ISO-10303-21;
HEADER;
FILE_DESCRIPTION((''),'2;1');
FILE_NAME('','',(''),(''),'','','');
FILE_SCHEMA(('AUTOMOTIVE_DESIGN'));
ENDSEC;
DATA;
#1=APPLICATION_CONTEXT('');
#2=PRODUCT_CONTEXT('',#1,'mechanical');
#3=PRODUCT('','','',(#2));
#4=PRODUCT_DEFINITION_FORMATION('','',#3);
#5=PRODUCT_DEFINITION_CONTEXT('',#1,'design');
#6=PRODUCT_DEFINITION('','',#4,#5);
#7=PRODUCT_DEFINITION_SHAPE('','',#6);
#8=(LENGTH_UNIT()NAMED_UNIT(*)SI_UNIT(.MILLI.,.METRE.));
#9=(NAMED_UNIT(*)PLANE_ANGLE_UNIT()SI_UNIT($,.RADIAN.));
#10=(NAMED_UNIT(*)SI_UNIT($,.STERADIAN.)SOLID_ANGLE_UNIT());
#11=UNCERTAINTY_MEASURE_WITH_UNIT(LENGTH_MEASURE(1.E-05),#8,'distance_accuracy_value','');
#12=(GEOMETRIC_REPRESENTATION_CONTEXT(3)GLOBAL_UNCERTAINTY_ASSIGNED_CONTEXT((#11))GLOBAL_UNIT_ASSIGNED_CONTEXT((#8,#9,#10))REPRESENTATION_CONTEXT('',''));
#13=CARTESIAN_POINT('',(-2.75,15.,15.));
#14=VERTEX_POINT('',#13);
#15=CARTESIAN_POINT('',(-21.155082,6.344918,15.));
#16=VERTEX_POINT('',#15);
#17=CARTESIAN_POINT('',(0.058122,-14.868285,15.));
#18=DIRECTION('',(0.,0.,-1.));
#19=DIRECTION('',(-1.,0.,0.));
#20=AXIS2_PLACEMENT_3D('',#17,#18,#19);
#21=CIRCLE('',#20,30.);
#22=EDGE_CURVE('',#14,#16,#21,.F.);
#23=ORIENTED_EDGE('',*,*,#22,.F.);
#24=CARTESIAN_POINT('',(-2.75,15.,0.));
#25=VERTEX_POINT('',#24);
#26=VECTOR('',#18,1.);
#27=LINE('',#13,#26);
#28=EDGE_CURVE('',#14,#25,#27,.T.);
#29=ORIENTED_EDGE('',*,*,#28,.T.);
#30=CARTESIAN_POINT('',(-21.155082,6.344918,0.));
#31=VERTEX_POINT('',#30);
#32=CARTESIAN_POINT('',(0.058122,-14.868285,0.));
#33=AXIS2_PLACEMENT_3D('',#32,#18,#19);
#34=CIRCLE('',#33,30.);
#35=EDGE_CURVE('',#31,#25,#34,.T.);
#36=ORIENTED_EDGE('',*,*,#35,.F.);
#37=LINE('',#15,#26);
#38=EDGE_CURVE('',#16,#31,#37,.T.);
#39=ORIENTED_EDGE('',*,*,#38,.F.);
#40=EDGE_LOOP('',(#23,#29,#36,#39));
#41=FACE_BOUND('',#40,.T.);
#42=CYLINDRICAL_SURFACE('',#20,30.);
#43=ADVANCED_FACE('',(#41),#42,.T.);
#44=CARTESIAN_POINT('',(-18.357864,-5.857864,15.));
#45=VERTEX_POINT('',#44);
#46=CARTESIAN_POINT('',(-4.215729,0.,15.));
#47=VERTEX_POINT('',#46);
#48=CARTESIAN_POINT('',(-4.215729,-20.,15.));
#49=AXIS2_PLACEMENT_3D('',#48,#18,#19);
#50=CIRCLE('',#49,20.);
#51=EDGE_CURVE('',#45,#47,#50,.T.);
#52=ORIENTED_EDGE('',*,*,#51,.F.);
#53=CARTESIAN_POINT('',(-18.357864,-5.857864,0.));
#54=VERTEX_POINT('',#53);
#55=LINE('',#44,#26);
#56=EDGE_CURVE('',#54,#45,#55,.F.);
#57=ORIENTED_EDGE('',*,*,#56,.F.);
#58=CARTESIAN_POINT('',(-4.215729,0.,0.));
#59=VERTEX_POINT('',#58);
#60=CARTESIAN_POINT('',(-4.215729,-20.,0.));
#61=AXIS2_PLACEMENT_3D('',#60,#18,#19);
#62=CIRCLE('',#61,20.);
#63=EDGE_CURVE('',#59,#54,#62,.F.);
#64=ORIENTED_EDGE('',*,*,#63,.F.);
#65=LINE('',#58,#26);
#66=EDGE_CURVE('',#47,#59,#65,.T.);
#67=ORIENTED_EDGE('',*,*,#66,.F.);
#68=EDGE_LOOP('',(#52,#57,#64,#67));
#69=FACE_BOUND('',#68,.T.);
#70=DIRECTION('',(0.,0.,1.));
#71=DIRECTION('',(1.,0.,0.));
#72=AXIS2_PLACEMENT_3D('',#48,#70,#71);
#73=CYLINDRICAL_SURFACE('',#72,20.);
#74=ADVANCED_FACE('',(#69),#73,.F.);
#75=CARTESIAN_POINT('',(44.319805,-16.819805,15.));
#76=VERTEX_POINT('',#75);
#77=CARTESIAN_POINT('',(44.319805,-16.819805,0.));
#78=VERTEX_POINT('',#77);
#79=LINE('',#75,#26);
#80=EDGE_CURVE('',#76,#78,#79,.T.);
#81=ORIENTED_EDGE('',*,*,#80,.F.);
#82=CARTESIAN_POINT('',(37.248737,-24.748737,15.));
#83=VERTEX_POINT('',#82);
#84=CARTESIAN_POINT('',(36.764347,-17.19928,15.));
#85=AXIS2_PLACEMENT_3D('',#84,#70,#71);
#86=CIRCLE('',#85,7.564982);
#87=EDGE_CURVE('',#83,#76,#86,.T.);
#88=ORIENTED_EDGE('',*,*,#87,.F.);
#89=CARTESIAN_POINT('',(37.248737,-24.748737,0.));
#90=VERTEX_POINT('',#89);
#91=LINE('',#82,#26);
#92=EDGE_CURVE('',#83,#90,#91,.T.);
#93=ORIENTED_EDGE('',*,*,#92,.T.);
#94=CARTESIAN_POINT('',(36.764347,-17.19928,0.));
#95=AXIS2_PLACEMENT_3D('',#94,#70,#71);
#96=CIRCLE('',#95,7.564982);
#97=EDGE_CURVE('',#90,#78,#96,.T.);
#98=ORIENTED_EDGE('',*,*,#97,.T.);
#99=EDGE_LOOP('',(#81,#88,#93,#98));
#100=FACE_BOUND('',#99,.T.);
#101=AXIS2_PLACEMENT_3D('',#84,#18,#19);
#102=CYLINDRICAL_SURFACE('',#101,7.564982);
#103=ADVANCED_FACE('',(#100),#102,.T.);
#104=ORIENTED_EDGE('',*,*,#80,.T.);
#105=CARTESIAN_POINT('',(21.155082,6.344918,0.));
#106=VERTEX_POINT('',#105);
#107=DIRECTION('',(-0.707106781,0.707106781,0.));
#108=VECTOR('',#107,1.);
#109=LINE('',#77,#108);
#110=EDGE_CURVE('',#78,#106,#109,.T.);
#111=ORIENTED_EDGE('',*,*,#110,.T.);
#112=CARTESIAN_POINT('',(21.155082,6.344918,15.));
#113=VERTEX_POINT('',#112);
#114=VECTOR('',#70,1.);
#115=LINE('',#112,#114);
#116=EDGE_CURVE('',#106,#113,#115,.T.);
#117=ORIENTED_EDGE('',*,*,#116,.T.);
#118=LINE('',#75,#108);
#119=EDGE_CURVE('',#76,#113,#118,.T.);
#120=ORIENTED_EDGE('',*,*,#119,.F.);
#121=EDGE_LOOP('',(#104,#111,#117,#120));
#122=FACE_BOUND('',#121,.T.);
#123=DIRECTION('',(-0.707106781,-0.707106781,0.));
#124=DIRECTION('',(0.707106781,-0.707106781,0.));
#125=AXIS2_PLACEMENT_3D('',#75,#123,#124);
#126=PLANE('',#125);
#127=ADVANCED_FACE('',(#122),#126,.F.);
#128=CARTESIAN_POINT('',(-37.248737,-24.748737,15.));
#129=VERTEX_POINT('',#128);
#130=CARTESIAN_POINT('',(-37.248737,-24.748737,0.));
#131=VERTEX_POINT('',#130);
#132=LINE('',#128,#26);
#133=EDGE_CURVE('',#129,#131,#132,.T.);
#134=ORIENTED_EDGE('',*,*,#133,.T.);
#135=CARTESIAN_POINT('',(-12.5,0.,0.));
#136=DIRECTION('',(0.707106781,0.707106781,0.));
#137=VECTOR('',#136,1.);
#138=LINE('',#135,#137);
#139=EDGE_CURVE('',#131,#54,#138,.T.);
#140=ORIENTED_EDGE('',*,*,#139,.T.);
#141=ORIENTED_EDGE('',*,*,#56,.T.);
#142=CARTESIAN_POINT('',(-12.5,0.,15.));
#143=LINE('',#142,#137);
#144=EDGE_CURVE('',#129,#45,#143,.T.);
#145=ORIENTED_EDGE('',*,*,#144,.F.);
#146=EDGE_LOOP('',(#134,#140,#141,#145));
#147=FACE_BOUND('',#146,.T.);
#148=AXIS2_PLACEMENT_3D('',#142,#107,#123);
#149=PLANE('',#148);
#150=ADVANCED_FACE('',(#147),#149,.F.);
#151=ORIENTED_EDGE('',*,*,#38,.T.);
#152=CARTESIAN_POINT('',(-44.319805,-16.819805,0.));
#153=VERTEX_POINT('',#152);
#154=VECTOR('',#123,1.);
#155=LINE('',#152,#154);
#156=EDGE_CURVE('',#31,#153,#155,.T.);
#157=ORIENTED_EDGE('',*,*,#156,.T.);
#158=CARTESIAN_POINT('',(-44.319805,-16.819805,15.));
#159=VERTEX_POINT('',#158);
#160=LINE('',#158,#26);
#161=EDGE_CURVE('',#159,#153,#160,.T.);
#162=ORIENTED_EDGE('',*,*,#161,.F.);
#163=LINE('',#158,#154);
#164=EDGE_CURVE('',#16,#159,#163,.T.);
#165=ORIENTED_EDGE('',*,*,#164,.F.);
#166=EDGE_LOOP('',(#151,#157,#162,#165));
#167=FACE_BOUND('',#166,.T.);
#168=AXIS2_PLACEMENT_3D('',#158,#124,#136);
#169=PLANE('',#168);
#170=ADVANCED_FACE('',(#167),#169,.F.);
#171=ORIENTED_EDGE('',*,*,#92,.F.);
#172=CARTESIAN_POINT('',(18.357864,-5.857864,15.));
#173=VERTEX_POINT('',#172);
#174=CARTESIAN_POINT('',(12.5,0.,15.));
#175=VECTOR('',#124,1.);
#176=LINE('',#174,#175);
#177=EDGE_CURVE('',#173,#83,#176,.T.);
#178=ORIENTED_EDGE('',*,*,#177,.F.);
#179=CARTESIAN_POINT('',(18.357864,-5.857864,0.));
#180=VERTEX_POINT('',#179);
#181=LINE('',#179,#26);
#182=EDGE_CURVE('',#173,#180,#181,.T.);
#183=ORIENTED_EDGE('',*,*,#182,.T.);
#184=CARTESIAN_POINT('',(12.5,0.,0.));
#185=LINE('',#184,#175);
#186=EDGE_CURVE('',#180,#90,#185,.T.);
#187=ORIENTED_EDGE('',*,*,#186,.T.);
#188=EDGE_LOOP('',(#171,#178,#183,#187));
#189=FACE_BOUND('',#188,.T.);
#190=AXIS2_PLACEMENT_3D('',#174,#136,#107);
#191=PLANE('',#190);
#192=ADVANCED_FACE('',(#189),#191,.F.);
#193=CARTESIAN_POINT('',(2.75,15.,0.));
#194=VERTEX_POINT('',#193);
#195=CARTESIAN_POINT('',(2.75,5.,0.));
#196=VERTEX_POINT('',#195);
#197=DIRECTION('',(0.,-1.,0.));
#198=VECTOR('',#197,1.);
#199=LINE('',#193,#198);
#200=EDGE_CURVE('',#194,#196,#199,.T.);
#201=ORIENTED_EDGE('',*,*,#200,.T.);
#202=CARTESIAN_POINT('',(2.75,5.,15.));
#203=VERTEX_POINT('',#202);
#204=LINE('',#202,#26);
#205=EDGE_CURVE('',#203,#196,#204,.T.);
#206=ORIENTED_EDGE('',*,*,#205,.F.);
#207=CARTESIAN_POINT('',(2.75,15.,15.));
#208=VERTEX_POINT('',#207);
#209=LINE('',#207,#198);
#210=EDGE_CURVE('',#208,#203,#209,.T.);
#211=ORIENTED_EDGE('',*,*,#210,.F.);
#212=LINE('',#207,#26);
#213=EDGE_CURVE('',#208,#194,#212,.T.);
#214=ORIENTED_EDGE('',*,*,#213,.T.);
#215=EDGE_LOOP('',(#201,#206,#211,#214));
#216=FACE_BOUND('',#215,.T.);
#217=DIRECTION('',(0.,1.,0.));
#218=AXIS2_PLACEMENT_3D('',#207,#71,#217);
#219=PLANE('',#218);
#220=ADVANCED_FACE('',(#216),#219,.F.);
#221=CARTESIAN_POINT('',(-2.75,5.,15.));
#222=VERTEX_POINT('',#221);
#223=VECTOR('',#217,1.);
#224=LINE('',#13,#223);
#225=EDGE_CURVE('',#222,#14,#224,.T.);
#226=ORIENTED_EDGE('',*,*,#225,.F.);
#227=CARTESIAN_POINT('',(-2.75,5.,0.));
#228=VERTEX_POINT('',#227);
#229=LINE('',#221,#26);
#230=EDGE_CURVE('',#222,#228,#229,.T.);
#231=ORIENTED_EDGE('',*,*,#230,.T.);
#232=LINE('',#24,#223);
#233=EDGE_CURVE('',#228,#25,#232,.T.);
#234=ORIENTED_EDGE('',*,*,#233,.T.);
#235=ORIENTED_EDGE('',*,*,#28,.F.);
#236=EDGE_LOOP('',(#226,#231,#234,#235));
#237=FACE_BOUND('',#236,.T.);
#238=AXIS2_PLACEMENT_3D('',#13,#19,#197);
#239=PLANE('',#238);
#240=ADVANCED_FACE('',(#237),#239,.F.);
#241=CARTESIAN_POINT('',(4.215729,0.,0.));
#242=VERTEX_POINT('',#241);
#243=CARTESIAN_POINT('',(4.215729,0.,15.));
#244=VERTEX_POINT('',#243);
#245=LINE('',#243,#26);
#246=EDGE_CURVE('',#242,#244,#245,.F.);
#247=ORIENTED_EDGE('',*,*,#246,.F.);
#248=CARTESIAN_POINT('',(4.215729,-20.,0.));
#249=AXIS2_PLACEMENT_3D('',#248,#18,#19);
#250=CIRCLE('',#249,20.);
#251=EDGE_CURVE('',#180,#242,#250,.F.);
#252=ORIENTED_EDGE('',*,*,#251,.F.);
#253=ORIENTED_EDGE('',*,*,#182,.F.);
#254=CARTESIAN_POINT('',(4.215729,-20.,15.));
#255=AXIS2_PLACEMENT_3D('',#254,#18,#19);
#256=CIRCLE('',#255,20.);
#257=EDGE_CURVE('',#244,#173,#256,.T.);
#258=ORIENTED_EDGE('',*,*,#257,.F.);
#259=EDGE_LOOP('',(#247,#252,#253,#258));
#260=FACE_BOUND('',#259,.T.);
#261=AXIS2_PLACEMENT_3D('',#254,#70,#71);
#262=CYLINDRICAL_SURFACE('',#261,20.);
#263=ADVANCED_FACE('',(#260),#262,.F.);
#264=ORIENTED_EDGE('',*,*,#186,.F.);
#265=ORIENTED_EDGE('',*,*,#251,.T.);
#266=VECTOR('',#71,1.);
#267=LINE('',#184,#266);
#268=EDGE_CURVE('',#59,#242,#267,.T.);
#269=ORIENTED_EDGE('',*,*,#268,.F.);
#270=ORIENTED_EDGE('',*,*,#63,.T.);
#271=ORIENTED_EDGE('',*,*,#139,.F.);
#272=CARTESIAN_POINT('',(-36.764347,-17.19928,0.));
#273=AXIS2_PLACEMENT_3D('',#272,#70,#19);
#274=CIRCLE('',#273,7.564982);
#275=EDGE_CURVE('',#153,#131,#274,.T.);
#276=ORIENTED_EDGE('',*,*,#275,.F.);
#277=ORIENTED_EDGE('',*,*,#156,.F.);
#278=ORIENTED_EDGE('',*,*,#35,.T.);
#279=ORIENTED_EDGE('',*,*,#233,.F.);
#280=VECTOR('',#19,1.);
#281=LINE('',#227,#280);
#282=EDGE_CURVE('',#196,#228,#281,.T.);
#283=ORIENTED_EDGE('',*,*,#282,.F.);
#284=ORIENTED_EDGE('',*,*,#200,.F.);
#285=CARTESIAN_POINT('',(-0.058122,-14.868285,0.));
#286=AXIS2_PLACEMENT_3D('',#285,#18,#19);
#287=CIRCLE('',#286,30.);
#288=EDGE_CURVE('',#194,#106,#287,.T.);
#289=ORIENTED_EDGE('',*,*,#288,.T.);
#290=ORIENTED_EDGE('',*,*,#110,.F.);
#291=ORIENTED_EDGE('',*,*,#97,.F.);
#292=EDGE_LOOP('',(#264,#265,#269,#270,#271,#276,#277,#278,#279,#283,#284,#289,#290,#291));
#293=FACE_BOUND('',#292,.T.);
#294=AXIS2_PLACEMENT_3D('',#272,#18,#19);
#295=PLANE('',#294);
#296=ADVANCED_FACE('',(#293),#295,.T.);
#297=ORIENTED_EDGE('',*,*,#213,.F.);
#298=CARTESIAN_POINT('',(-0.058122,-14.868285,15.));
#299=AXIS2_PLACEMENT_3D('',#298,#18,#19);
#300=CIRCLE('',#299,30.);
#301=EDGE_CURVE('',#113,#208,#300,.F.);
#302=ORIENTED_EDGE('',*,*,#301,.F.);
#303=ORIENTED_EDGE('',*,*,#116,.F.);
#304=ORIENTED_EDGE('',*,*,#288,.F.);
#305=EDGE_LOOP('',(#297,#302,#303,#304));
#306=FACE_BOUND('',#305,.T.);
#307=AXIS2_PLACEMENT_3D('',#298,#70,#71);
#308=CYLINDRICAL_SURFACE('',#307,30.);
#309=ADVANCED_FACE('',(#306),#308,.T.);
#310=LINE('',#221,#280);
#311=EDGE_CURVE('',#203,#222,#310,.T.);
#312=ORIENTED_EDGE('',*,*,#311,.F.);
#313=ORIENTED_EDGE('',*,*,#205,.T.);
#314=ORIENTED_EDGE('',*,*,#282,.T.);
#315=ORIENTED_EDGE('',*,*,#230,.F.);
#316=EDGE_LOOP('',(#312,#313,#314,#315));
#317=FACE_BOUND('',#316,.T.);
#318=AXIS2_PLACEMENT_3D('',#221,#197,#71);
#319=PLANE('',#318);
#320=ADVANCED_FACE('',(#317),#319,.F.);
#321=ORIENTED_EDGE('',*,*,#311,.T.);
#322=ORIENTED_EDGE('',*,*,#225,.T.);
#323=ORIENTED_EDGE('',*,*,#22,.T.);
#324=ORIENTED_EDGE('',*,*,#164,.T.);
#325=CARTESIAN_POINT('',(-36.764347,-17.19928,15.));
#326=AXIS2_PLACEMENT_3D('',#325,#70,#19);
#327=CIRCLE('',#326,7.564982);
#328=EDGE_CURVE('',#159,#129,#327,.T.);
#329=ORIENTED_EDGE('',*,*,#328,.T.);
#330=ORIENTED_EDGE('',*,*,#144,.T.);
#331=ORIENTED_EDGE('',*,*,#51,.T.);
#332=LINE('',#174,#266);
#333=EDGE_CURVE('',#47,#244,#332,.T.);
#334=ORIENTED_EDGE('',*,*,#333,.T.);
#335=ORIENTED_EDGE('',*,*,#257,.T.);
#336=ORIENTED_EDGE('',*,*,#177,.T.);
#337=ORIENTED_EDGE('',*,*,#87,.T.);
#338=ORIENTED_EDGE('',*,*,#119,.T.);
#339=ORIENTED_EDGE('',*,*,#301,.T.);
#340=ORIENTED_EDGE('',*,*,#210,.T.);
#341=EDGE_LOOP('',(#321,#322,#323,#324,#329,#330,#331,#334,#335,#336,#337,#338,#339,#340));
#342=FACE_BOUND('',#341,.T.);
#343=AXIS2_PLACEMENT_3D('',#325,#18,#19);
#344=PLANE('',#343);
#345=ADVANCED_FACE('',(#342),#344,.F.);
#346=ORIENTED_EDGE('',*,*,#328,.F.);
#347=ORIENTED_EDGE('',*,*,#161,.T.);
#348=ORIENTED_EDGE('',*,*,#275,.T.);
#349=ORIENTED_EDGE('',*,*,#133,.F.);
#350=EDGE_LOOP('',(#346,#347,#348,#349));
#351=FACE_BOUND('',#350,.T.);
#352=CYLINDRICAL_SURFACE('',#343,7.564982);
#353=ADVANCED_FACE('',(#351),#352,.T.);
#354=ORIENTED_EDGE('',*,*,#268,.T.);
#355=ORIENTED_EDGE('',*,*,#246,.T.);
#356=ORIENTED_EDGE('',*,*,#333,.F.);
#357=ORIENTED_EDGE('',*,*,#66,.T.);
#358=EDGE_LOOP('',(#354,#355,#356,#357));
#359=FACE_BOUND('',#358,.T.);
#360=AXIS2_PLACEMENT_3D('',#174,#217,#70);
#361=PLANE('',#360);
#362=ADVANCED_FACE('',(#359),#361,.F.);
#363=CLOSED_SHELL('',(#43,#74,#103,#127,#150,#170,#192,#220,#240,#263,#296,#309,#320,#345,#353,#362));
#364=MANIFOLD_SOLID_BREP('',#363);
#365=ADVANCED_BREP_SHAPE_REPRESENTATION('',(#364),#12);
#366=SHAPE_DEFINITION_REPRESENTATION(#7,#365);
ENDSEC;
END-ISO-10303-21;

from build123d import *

# Parameters (mm, degrees)
ESTRUSIONE_ESTRUSIONE1_DEPTH = 15
RACCORDO1_R                  = 30
RACCORDO2_R                  = 20


with BuildPart() as part:
    # Schizzo2 → Estrusione-Estrusione1 (new body)
    with BuildSketch(Plane.XY):
        with BuildLine():
            Line((12.5, 0), (-12.5, 0))
            Line((-12.5, 0), (-37.248737342, -24.748737342))
            ThreePointArc((-37.248737342, -24.748737342), (-42.410299766, -22.234372931), (-44.319805153, -16.819805153))
            Line((-44.319805153, -16.819805153), (-12.5, 15))
            Line((-12.5, 15), (-2.75, 15))
            Line((-2.75, 15), (-2.75, 5))
            Line((-2.75, 5), (2.75, 5))
            Line((2.75, 5), (2.75, 15))
            Line((2.75, 15), (12.5, 15))
            Line((12.5, 15), (44.319805153, -16.819805153))
            ThreePointArc((44.319805153, -16.819805153), (42.410299766, -22.234372931), (37.248737342, -24.748737342))
            Line((37.248737342, -24.748737342), (12.5, 0))
        make_face()
    extrude(amount=ESTRUSIONE_ESTRUSIONE1_DEPTH)

    # Raccordo1
    # the kernel refuses this fillet: 30 mm, written as the material it takes off along each edge
    with BuildSketch(Plane(origin=(12.5, 15, -30.600334507), x_dir=(-1, 0, 0), z_dir=(0, 0, 1))) as raccordo1_piece_1:
        with BuildLine():
            CenterArc((12.558121821, 29.86828505), RACCORDO1_R, 225, 39.629019647)
            Line((-8.655081615, 8.655081615), (-9.079345683, 8.230817546))
            Line((-9.079345683, 8.230817546), (-0.424264069, -0.424264069))
            Line((-0.424264069, -0.424264069), (0, -0.6))
            ThreePointArc((0, -0.6), (4.875, -0.6), (9.693837564, -0.597365701))
            Line((9.693837564, -0.597365701), (9.75, 0))
        make_face()
    extrude(amount=76.200669014, mode=Mode.SUBTRACT)
    with BuildSketch(Plane(origin=(-12.5, 15, -30.600334507), x_dir=(-0.7071067811865485, -0.7071067811865467, 0), z_dir=(0, 0, 1))) as raccordo1_piece_2:
        with BuildLine():
            CenterArc((12.240133803, 30), RACCORDO1_R, 230.370980353, 39.629019647)
            Line((-6.894291117, 6.894291117), (-7.276979615, 6.432176939))
            ThreePointArc((-7.276979615, 6.432176939), (-3.871409627, 3.02288149), (-0.424264069, -0.424264069))
            Line((-0.424264069, -0.424264069), (0, -0.6))
            Line((0, -0.6), (12.240133803, -0.6))
            Line((12.240133803, -0.6), (12.240133803, 0))
        make_face()
    extrude(amount=76.200669014, mode=Mode.SUBTRACT)

    # Raccordo2
    raccordo2_edges = [part.edges().sort_by_distance(p)[0] for p in [
        (12.5, 0, 7.5),
        (-12.5, 0, 7.5),
    ]]
    fillet(raccordo2_edges, radius=RACCORDO2_R)


solid = part.part
